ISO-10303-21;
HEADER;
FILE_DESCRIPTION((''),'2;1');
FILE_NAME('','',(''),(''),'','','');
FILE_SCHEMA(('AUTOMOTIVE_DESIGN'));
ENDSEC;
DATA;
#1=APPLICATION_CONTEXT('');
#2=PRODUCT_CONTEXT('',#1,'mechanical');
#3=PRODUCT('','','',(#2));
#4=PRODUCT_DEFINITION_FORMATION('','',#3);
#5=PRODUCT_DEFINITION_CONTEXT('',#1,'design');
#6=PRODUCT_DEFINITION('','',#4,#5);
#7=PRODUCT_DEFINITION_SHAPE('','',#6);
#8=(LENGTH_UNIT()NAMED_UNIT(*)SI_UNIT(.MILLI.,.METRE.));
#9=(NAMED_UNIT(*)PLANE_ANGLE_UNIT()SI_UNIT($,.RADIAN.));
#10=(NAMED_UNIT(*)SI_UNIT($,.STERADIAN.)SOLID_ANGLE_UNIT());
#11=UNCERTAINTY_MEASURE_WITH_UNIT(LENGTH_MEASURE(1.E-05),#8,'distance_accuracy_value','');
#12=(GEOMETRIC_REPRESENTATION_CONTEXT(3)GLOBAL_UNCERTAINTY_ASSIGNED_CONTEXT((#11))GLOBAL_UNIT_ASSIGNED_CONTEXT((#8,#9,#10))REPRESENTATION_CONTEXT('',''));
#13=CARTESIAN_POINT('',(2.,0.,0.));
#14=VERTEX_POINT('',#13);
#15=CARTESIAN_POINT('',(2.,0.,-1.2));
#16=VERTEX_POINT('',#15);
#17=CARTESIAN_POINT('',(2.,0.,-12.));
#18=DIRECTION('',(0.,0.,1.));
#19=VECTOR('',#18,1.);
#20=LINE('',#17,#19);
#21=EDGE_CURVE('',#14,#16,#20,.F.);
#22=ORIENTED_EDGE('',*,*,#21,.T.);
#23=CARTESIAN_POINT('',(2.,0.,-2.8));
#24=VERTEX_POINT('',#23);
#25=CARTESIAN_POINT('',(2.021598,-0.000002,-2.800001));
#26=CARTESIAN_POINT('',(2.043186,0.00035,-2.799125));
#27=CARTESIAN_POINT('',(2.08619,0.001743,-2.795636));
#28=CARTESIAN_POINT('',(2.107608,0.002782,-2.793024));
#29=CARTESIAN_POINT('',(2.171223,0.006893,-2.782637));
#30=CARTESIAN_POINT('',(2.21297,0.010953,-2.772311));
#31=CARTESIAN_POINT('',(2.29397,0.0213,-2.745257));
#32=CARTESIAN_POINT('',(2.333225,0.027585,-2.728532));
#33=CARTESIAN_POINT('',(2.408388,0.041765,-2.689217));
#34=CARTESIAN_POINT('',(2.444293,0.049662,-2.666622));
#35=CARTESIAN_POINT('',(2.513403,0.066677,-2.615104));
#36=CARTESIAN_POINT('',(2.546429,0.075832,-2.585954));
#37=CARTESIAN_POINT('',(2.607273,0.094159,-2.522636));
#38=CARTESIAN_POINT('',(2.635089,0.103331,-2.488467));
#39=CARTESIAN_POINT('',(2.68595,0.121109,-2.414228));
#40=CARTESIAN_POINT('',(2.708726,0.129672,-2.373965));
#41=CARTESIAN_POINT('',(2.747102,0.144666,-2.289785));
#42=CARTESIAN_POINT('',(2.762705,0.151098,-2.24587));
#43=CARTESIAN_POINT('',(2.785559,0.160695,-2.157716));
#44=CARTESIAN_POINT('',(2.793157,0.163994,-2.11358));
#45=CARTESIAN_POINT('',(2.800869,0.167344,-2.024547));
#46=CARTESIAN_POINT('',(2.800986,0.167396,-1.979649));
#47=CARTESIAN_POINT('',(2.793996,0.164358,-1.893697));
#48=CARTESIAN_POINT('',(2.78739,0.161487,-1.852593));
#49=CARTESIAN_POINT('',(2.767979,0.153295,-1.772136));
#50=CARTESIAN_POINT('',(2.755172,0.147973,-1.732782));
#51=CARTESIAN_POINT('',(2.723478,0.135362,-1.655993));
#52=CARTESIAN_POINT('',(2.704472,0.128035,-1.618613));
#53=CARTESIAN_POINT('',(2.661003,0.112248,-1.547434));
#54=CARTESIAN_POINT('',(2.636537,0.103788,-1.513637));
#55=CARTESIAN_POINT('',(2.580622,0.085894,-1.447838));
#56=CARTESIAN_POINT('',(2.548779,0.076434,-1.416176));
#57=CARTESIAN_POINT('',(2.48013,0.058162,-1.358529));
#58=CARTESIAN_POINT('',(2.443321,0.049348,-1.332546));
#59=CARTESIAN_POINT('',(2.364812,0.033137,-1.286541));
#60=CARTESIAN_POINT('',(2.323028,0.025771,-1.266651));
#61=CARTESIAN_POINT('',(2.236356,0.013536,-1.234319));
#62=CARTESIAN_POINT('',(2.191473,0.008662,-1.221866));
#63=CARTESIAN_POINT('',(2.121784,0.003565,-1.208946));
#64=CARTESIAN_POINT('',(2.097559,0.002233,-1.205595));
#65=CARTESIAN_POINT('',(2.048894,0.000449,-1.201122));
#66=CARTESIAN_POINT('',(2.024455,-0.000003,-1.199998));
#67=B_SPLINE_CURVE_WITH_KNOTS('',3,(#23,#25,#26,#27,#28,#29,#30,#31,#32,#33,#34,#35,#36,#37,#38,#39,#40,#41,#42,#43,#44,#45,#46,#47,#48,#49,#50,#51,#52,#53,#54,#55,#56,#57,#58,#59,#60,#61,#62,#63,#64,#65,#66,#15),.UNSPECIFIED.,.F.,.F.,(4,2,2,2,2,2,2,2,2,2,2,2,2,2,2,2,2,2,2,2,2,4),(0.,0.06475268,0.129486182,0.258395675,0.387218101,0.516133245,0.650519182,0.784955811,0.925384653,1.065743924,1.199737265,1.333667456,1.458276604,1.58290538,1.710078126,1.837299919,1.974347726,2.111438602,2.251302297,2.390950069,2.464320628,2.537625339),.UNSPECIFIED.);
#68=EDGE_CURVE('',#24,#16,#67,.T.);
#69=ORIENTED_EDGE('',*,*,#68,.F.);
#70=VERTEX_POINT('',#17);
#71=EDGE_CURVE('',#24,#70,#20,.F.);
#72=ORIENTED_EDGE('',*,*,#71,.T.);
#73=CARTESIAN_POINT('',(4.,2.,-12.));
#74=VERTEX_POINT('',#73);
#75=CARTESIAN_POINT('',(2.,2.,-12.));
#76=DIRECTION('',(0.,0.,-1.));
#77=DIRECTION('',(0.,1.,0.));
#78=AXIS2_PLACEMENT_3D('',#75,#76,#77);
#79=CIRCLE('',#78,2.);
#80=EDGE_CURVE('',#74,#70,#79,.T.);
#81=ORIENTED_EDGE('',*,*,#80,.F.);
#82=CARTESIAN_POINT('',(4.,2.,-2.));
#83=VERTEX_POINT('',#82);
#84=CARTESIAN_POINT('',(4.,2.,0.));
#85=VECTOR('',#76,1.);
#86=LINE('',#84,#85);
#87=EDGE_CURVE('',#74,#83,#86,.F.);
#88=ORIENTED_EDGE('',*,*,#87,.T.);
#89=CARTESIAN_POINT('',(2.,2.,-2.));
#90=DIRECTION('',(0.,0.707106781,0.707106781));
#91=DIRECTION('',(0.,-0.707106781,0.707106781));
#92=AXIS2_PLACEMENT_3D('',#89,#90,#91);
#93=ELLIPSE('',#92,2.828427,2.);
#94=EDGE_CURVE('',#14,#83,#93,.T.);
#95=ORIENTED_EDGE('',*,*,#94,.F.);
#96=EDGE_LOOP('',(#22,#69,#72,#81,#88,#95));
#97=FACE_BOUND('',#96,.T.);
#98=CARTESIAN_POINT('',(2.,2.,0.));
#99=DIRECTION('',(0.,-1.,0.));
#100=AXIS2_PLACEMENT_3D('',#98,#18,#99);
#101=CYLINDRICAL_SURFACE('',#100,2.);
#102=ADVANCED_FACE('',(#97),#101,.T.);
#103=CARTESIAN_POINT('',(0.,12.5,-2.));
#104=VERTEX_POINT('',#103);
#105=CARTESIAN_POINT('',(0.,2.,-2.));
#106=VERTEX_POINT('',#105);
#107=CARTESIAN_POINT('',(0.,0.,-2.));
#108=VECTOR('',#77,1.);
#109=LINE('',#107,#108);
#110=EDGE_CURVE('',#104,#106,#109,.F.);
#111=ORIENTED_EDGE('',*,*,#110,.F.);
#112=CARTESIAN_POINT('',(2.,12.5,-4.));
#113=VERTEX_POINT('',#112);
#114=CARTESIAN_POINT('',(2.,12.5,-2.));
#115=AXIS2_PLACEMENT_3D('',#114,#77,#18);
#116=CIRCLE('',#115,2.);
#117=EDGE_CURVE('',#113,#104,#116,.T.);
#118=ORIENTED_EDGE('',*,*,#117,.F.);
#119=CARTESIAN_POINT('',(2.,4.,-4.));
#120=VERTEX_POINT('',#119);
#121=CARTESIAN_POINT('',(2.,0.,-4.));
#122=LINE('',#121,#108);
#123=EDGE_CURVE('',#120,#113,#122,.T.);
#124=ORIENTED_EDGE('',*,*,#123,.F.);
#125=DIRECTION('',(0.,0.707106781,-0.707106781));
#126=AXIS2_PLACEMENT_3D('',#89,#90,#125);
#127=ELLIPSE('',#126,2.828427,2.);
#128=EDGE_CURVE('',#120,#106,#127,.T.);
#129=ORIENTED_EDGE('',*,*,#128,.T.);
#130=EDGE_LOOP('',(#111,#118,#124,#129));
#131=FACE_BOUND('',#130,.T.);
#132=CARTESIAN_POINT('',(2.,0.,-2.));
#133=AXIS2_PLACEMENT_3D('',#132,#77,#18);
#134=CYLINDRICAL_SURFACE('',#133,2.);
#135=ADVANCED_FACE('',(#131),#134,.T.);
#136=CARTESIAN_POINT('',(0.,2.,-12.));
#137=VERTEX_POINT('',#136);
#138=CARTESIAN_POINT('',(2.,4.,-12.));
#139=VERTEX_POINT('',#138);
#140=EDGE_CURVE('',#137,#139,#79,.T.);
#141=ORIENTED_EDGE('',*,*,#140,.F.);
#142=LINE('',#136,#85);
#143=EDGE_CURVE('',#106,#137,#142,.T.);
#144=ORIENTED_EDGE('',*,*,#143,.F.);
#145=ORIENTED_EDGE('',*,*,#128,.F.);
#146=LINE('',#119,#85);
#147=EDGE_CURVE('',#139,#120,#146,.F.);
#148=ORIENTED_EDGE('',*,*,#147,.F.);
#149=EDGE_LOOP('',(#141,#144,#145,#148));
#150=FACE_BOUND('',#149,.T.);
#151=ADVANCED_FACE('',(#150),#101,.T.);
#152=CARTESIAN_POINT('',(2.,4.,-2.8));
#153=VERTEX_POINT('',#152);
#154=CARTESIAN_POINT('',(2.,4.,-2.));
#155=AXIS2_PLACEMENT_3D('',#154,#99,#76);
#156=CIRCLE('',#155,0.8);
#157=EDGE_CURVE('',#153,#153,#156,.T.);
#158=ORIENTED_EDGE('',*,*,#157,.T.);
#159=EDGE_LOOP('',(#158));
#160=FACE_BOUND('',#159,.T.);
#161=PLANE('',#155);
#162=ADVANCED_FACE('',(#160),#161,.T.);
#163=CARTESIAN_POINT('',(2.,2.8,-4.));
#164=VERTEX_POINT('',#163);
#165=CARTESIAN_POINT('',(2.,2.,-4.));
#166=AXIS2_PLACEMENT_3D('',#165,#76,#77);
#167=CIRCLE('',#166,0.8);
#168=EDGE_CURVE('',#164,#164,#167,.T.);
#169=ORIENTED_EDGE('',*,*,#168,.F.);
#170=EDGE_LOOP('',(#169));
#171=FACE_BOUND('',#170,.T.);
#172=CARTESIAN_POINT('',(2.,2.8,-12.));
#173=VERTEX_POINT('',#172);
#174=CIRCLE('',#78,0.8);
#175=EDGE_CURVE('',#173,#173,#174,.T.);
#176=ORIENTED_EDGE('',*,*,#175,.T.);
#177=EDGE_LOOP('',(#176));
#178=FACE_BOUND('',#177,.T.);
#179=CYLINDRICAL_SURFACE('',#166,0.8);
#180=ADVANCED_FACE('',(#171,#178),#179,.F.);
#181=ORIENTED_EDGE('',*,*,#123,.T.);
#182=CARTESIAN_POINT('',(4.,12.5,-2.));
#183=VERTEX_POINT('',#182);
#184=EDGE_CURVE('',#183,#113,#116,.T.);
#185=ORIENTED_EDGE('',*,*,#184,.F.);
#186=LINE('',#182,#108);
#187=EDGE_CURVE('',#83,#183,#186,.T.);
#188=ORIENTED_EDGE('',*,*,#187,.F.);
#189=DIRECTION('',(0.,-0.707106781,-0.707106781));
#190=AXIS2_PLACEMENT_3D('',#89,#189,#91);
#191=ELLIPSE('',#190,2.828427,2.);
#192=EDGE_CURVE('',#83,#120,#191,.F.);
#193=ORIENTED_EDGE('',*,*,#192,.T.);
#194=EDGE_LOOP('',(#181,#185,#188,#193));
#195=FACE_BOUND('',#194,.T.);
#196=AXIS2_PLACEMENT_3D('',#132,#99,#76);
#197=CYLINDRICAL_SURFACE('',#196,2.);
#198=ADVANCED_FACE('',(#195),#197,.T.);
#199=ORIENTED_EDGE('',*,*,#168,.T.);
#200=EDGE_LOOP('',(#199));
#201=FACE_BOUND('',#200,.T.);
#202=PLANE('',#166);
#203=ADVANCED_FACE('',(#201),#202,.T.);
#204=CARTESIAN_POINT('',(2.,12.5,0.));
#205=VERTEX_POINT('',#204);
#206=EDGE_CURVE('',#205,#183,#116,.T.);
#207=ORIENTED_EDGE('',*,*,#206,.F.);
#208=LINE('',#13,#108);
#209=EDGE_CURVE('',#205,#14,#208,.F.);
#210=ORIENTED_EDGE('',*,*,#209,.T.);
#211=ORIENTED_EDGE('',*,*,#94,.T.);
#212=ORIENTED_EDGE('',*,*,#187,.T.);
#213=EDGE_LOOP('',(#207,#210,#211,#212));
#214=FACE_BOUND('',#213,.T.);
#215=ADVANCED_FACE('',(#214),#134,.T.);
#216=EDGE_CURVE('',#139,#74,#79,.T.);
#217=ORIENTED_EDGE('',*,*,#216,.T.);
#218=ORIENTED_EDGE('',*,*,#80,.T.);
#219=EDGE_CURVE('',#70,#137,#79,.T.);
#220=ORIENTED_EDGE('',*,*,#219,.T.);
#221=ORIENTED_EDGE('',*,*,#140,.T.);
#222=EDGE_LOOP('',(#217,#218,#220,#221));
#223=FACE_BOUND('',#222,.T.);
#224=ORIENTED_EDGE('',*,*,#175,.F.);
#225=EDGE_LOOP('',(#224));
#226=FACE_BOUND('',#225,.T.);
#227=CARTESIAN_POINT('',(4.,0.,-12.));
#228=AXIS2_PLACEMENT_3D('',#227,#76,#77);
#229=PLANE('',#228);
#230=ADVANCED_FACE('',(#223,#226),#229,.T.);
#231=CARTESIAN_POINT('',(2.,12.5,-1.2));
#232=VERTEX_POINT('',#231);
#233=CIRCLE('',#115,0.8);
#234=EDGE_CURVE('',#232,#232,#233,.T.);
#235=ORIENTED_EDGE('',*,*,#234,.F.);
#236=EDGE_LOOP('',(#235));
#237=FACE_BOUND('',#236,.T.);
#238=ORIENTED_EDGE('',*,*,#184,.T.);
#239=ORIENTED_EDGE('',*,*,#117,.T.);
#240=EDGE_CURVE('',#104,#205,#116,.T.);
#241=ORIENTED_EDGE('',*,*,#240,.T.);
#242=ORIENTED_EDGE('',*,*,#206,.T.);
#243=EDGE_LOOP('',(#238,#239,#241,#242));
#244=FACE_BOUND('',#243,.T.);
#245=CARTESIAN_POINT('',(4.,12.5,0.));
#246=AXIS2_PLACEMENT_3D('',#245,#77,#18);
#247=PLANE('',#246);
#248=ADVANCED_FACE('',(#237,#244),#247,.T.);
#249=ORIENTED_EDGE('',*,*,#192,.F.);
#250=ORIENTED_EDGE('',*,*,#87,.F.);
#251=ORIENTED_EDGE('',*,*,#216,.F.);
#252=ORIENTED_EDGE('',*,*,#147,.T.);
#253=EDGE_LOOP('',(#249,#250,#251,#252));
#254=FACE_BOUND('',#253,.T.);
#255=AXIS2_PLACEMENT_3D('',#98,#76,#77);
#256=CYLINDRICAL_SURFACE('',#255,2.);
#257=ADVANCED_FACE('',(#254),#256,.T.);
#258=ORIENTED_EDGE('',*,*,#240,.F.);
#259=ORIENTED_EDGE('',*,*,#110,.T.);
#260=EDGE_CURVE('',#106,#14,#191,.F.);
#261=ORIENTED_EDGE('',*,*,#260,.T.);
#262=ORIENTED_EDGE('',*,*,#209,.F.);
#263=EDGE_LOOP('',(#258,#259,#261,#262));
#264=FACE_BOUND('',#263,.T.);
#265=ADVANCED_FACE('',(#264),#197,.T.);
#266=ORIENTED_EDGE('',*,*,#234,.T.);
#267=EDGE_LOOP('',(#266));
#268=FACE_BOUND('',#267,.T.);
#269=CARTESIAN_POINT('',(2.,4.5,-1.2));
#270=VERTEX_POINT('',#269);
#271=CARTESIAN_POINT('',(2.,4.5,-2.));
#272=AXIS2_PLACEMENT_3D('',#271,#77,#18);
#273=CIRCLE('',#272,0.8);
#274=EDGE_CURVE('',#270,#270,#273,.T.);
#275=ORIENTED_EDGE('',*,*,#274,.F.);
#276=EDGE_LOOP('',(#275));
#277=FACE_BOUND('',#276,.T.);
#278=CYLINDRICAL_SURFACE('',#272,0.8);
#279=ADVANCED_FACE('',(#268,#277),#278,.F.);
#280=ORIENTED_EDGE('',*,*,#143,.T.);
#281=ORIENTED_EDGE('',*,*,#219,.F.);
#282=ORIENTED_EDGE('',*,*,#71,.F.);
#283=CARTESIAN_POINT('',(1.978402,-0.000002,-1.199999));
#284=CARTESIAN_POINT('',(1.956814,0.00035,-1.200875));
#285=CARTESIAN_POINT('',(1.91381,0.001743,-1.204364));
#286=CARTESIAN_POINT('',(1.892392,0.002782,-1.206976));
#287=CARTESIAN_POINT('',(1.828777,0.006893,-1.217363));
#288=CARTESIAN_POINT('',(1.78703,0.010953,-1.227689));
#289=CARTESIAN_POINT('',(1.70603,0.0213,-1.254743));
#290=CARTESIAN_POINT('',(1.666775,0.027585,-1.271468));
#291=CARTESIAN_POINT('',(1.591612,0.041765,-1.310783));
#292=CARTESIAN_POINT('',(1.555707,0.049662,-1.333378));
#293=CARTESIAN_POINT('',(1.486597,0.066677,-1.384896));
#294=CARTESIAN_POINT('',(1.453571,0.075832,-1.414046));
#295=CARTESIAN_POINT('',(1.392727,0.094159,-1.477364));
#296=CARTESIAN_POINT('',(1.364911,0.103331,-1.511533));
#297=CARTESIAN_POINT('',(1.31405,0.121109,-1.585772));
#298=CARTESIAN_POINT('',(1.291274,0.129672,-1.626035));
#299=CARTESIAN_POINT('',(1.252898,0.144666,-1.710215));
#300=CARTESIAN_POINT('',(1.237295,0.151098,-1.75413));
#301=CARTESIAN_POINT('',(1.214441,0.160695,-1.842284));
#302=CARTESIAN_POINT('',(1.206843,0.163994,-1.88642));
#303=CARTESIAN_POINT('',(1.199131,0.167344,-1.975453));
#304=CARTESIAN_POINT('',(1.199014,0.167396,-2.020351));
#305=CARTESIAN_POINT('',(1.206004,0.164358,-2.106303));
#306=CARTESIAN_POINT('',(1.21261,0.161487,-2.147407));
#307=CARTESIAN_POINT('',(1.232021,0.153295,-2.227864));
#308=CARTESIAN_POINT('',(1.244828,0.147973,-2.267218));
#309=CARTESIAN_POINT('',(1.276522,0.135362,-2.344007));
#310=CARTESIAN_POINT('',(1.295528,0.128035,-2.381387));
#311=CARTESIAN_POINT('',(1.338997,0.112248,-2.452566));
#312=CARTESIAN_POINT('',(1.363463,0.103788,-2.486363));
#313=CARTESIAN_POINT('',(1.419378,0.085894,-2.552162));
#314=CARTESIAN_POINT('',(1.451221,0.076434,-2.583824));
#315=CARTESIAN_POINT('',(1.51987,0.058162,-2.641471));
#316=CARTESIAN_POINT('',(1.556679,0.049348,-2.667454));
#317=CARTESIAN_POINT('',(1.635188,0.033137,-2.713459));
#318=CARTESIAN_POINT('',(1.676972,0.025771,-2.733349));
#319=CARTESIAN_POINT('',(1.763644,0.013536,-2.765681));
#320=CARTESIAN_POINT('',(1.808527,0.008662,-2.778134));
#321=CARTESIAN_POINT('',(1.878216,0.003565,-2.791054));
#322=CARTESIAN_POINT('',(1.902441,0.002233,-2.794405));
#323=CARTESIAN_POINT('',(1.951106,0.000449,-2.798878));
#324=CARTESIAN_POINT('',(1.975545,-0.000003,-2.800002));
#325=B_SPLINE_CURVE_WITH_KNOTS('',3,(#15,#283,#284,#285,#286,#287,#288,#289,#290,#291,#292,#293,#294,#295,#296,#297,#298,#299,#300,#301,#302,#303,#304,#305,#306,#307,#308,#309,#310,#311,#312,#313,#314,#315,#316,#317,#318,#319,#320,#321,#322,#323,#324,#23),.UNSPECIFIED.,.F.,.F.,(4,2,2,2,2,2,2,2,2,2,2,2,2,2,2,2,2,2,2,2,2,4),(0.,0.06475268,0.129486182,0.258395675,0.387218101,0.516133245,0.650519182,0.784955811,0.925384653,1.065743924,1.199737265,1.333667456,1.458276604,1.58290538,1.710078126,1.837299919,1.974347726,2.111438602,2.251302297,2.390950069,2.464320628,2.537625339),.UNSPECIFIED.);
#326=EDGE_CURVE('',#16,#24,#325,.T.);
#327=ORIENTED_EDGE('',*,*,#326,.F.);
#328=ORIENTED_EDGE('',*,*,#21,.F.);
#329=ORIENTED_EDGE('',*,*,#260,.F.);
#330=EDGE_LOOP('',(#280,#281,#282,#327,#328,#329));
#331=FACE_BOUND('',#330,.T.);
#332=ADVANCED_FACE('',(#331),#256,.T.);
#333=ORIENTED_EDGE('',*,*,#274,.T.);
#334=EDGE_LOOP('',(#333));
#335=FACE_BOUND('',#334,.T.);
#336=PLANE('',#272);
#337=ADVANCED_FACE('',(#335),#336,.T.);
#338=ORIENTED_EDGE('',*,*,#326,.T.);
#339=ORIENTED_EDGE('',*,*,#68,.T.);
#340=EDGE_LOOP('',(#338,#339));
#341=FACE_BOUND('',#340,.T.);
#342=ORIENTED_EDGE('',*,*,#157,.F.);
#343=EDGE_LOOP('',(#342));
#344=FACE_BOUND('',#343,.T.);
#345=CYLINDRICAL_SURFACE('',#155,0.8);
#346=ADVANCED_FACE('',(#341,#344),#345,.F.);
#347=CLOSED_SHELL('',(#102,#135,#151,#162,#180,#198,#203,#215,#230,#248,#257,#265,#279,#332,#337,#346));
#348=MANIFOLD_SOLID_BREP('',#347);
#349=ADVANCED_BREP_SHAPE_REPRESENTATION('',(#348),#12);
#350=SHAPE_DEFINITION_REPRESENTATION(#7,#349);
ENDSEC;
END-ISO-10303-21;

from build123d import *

# Parameters (mm, degrees)
ESQUISSE4_W             = 8
ESQUISSE4_H             = 4
BOSS_EXTRU_2_DEPTH      = 4
ESQUISSE10_R            = 0.8
ENL_V_MAT_EXTRU_3_DEPTH = 8
ENL_V_START             = -4
ESQUISSE11_R            = 0.8
ENL_V_MAT_EXTRU_4_DEPTH = 4
ESQUISSE7_R             = 0.8
ENL_V_MAT_EXTRU_2_DEPTH = 8
CONG_4_R                = 2


with BuildPart() as part:
    # Esquisse4 → Boss.-Extru.2 (new body)
    with BuildSketch(Plane(origin=(0, 0, 0), x_dir=(0, 0, -1), z_dir=(1, 0, 0))):
        with Locations((8, 2)):
            Rectangle(ESQUISSE4_W, ESQUISSE4_H)
        Polygon((4, 0), (4, 4), (4, 12.5), (0, 12.5), (0, 0), align=None)
    extrude(amount=BOSS_EXTRU_2_DEPTH)

    # Esquisse10 → Enlèv. mat.-Extru.3 (cut)
    with BuildSketch(Plane(origin=(0, 12.5, 0), x_dir=(1, 0, 0), z_dir=(0, 1, 0))):
        with Locations(Location((2, 2, 0), (0, 0, 270))):
            Circle(ESQUISSE10_R)
    extrude(amount=-ENL_V_MAT_EXTRU_3_DEPTH, mode=Mode.SUBTRACT)

    # Esquisse11 → Enlèv. mat.-Extru.4 (cut)
    with BuildSketch(Plane.XZ.offset(ENL_V_START)):
        with Locations(Location((2, -2, 0), (0, 0, 90))):
            Circle(ESQUISSE11_R)
    extrude(amount=ENL_V_MAT_EXTRU_4_DEPTH, mode=Mode.SUBTRACT)

    # Esquisse7 → Enlèv. mat.-Extru.2 (cut)
    with BuildSketch(Plane(origin=(0, 0, -12), x_dir=(1, 0, 0), z_dir=(0, 0, -1))):
        with Locations(Location((2, -2, 0), (0, 0, 270))):
            Circle(ESQUISSE7_R)
    extrude(amount=-ENL_V_MAT_EXTRU_2_DEPTH, mode=Mode.SUBTRACT)

    # Congé4
    # the kernel refuses this fillet: 2 mm, written as the material it takes off along each edge
    with BuildSketch(Plane(origin=(4, 0, -17), x_dir=(-1, 0, 0), z_dir=(0, 0, 1)), Plane(origin=(0, 0, 5), x_dir=(1, 0, 0), z_dir=(0, 0, -1))) as cong_4_piece_1:
        with BuildLine():
            CenterArc((CONG_4_R, -CONG_4_R), CONG_4_R, 90, 90)
            Line((0, -CONG_4_R), (0, 0))
            Line((0, 0), (CONG_4_R, 0))
        make_face()
    extrude(amount=22, mode=Mode.SUBTRACT)
    with BuildSketch(Plane(origin=(4, 17.5, -4), x_dir=(0, 0, 1), z_dir=(0, -1, 0)), Plane(origin=(0, 4, -4), x_dir=(0, 0, 1), z_dir=(0, 1, 0))) as cong_4_piece_2:
        with BuildLine():
            CenterArc((CONG_4_R, CONG_4_R), CONG_4_R, 180, 90)
            Line((0, CONG_4_R), (0, 0))
            Line((0, 0), (CONG_4_R, 0))
        make_face()
    extrude(amount=13.5, mode=Mode.SUBTRACT)
    with BuildSketch(Plane(origin=(4, 4, -17), x_dir=(0, -1, 0), z_dir=(0, 0, 1))) as cong_4_piece_3:
        with BuildLine():
            CenterArc((CONG_4_R, -CONG_4_R), CONG_4_R, 90, 90)
            Line((0, -CONG_4_R), (0, 0))
            Line((0, 0), (CONG_4_R, 0))
        make_face()
    extrude(amount=13, mode=Mode.SUBTRACT)
    with BuildSketch(Plane(origin=(0, 4, -17), x_dir=(0, -1, 0), z_dir=(0, 0, 1))) as cong_4_piece_4:
        with BuildLine():
            CenterArc((CONG_4_R, CONG_4_R), CONG_4_R, 180, 90)
            Line((0, CONG_4_R), (0, 0))
            Line((0, 0), (CONG_4_R, 0))
        make_face()
    extrude(amount=13, mode=Mode.SUBTRACT)
    with BuildSketch(Plane(origin=(4, 17.5, 0), x_dir=(0, 0, -1), z_dir=(0, -1, 0))) as cong_4_piece_5:
        with BuildLine():
            CenterArc((CONG_4_R, -CONG_4_R), CONG_4_R, 90, 90)
            Line((0, -CONG_4_R), (0, 0))
            Line((0, 0), (CONG_4_R, 0))
        make_face()
    extrude(amount=22.5, mode=Mode.SUBTRACT)
    with BuildSketch(Plane(origin=(0, 17.5, 0), x_dir=(0, 0, -1), z_dir=(0, -1, 0))) as cong_4_piece_6:
        with BuildLine():
            CenterArc((CONG_4_R, CONG_4_R), CONG_4_R, 180, 90)
            Line((0, CONG_4_R), (0, 0))
            Line((0, 0), (CONG_4_R, 0))
        make_face()
    extrude(amount=22.5, mode=Mode.SUBTRACT)
    with BuildSketch(Plane(origin=(4, 4, -12), x_dir=(0, -1, 0), z_dir=(0, 0, 1))) as cong_4_piece_7a_section:
        with BuildLine():
            CenterArc((CONG_4_R, -CONG_4_R), CONG_4_R, 90, 90)
            Line((0, -CONG_4_R), (0, 0))
            Line((0, 0), (CONG_4_R, 0))
        make_face()
    cong_4_piece_7a = extrude(amount=13, mode=Mode.PRIVATE)
    cong_4_piece_7a = split(cong_4_piece_7a, bisect_by=Plane(origin=(4, 4, 0), z_dir=(0, 0, -1)), keep=Keep.TOP, mode=Mode.PRIVATE)
    cong_4_piece_7a = cong_4_piece_7a - Plane(origin=(2, 4, -2), x_dir=(0, 0, 1), z_dir=(0, 1, 0)) * Cylinder(0.8, 35, mode=Mode.PRIVATE)
    cong_4_piece_7a = split(cong_4_piece_7a, bisect_by=Plane(origin=(4, 4, -4), z_dir=(0, 0, 1)), keep=Keep.TOP, mode=Mode.PRIVATE)
    with BuildSketch(Plane(origin=(4, 12.5, -4), x_dir=(0, 0, 1), z_dir=(0, -1, 0))) as cong_4_piece_7b_section:
        with BuildLine():
            CenterArc((CONG_4_R, CONG_4_R), CONG_4_R, 180, 90)
            Line((0, CONG_4_R), (0, 0))
            Line((0, 0), (CONG_4_R, 0))
        make_face()
    cong_4_piece_7b = extrude(amount=13.5, mode=Mode.PRIVATE)
    cong_4_piece_7b = split(cong_4_piece_7b, bisect_by=Plane(origin=(4, 0, -4), z_dir=(0, 1, 0)), keep=Keep.TOP, mode=Mode.PRIVATE)
    cong_4_piece_7b = split(cong_4_piece_7b, bisect_by=Plane(origin=(4, 4, -4), z_dir=(0, -1, 0)), keep=Keep.TOP, mode=Mode.PRIVATE)
    cong_4_piece_7b = cong_4_piece_7b - Plane(origin=(2, 2, -4), x_dir=(0, 1, 0), z_dir=(0, 0, -1)) * Cylinder(0.8, 35, mode=Mode.PRIVATE)
    cong_4_piece_7 = cong_4_piece_7a & cong_4_piece_7b
    add(cong_4_piece_7, mode=Mode.SUBTRACT)
    with BuildSketch(Plane(origin=(0, 4, -12), x_dir=(0, -1, 0), z_dir=(0, 0, 1))) as cong_4_piece_8a_section:
        with BuildLine():
            CenterArc((CONG_4_R, CONG_4_R), CONG_4_R, 180, 90)
            Line((0, CONG_4_R), (0, 0))
            Line((0, 0), (CONG_4_R, 0))
        make_face()
    cong_4_piece_8a = extrude(amount=13, mode=Mode.PRIVATE)
    cong_4_piece_8a = split(cong_4_piece_8a, bisect_by=Plane(origin=(0, 4, 0), z_dir=(0, 0, -1)), keep=Keep.TOP, mode=Mode.PRIVATE)
    cong_4_piece_8a = cong_4_piece_8a - Plane(origin=(2, 4, -2), x_dir=(0, 0, 1), z_dir=(0, 1, 0)) * Cylinder(0.8, 35, mode=Mode.PRIVATE)
    cong_4_piece_8a = split(cong_4_piece_8a, bisect_by=Plane(origin=(0, 4, -4), z_dir=(0, 0, 1)), keep=Keep.TOP, mode=Mode.PRIVATE)
    with BuildSketch(Plane(origin=(0, -1, -4), x_dir=(0, 0, 1), z_dir=(0, 1, 0))) as cong_4_piece_8b_section:
        with BuildLine():
            CenterArc((CONG_4_R, CONG_4_R), CONG_4_R, 180, 90)
            Line((0, CONG_4_R), (0, 0))
            Line((0, 0), (CONG_4_R, 0))
        make_face()
    cong_4_piece_8b = extrude(amount=13.5, mode=Mode.PRIVATE)
    cong_4_piece_8b = split(cong_4_piece_8b, bisect_by=Plane(origin=(0, 0, -4), z_dir=(0, 1, 0)), keep=Keep.TOP, mode=Mode.PRIVATE)
    cong_4_piece_8b = split(cong_4_piece_8b, bisect_by=Plane(origin=(0, 4, -4), z_dir=(0, -1, 0)), keep=Keep.TOP, mode=Mode.PRIVATE)
    cong_4_piece_8b = cong_4_piece_8b - Plane(origin=(2, 2, -4), x_dir=(0, 1, 0), z_dir=(0, 0, -1)) * Cylinder(0.8, 35, mode=Mode.PRIVATE)
    cong_4_piece_8 = cong_4_piece_8a & cong_4_piece_8b
    add(cong_4_piece_8, mode=Mode.SUBTRACT)


solid = part.part
